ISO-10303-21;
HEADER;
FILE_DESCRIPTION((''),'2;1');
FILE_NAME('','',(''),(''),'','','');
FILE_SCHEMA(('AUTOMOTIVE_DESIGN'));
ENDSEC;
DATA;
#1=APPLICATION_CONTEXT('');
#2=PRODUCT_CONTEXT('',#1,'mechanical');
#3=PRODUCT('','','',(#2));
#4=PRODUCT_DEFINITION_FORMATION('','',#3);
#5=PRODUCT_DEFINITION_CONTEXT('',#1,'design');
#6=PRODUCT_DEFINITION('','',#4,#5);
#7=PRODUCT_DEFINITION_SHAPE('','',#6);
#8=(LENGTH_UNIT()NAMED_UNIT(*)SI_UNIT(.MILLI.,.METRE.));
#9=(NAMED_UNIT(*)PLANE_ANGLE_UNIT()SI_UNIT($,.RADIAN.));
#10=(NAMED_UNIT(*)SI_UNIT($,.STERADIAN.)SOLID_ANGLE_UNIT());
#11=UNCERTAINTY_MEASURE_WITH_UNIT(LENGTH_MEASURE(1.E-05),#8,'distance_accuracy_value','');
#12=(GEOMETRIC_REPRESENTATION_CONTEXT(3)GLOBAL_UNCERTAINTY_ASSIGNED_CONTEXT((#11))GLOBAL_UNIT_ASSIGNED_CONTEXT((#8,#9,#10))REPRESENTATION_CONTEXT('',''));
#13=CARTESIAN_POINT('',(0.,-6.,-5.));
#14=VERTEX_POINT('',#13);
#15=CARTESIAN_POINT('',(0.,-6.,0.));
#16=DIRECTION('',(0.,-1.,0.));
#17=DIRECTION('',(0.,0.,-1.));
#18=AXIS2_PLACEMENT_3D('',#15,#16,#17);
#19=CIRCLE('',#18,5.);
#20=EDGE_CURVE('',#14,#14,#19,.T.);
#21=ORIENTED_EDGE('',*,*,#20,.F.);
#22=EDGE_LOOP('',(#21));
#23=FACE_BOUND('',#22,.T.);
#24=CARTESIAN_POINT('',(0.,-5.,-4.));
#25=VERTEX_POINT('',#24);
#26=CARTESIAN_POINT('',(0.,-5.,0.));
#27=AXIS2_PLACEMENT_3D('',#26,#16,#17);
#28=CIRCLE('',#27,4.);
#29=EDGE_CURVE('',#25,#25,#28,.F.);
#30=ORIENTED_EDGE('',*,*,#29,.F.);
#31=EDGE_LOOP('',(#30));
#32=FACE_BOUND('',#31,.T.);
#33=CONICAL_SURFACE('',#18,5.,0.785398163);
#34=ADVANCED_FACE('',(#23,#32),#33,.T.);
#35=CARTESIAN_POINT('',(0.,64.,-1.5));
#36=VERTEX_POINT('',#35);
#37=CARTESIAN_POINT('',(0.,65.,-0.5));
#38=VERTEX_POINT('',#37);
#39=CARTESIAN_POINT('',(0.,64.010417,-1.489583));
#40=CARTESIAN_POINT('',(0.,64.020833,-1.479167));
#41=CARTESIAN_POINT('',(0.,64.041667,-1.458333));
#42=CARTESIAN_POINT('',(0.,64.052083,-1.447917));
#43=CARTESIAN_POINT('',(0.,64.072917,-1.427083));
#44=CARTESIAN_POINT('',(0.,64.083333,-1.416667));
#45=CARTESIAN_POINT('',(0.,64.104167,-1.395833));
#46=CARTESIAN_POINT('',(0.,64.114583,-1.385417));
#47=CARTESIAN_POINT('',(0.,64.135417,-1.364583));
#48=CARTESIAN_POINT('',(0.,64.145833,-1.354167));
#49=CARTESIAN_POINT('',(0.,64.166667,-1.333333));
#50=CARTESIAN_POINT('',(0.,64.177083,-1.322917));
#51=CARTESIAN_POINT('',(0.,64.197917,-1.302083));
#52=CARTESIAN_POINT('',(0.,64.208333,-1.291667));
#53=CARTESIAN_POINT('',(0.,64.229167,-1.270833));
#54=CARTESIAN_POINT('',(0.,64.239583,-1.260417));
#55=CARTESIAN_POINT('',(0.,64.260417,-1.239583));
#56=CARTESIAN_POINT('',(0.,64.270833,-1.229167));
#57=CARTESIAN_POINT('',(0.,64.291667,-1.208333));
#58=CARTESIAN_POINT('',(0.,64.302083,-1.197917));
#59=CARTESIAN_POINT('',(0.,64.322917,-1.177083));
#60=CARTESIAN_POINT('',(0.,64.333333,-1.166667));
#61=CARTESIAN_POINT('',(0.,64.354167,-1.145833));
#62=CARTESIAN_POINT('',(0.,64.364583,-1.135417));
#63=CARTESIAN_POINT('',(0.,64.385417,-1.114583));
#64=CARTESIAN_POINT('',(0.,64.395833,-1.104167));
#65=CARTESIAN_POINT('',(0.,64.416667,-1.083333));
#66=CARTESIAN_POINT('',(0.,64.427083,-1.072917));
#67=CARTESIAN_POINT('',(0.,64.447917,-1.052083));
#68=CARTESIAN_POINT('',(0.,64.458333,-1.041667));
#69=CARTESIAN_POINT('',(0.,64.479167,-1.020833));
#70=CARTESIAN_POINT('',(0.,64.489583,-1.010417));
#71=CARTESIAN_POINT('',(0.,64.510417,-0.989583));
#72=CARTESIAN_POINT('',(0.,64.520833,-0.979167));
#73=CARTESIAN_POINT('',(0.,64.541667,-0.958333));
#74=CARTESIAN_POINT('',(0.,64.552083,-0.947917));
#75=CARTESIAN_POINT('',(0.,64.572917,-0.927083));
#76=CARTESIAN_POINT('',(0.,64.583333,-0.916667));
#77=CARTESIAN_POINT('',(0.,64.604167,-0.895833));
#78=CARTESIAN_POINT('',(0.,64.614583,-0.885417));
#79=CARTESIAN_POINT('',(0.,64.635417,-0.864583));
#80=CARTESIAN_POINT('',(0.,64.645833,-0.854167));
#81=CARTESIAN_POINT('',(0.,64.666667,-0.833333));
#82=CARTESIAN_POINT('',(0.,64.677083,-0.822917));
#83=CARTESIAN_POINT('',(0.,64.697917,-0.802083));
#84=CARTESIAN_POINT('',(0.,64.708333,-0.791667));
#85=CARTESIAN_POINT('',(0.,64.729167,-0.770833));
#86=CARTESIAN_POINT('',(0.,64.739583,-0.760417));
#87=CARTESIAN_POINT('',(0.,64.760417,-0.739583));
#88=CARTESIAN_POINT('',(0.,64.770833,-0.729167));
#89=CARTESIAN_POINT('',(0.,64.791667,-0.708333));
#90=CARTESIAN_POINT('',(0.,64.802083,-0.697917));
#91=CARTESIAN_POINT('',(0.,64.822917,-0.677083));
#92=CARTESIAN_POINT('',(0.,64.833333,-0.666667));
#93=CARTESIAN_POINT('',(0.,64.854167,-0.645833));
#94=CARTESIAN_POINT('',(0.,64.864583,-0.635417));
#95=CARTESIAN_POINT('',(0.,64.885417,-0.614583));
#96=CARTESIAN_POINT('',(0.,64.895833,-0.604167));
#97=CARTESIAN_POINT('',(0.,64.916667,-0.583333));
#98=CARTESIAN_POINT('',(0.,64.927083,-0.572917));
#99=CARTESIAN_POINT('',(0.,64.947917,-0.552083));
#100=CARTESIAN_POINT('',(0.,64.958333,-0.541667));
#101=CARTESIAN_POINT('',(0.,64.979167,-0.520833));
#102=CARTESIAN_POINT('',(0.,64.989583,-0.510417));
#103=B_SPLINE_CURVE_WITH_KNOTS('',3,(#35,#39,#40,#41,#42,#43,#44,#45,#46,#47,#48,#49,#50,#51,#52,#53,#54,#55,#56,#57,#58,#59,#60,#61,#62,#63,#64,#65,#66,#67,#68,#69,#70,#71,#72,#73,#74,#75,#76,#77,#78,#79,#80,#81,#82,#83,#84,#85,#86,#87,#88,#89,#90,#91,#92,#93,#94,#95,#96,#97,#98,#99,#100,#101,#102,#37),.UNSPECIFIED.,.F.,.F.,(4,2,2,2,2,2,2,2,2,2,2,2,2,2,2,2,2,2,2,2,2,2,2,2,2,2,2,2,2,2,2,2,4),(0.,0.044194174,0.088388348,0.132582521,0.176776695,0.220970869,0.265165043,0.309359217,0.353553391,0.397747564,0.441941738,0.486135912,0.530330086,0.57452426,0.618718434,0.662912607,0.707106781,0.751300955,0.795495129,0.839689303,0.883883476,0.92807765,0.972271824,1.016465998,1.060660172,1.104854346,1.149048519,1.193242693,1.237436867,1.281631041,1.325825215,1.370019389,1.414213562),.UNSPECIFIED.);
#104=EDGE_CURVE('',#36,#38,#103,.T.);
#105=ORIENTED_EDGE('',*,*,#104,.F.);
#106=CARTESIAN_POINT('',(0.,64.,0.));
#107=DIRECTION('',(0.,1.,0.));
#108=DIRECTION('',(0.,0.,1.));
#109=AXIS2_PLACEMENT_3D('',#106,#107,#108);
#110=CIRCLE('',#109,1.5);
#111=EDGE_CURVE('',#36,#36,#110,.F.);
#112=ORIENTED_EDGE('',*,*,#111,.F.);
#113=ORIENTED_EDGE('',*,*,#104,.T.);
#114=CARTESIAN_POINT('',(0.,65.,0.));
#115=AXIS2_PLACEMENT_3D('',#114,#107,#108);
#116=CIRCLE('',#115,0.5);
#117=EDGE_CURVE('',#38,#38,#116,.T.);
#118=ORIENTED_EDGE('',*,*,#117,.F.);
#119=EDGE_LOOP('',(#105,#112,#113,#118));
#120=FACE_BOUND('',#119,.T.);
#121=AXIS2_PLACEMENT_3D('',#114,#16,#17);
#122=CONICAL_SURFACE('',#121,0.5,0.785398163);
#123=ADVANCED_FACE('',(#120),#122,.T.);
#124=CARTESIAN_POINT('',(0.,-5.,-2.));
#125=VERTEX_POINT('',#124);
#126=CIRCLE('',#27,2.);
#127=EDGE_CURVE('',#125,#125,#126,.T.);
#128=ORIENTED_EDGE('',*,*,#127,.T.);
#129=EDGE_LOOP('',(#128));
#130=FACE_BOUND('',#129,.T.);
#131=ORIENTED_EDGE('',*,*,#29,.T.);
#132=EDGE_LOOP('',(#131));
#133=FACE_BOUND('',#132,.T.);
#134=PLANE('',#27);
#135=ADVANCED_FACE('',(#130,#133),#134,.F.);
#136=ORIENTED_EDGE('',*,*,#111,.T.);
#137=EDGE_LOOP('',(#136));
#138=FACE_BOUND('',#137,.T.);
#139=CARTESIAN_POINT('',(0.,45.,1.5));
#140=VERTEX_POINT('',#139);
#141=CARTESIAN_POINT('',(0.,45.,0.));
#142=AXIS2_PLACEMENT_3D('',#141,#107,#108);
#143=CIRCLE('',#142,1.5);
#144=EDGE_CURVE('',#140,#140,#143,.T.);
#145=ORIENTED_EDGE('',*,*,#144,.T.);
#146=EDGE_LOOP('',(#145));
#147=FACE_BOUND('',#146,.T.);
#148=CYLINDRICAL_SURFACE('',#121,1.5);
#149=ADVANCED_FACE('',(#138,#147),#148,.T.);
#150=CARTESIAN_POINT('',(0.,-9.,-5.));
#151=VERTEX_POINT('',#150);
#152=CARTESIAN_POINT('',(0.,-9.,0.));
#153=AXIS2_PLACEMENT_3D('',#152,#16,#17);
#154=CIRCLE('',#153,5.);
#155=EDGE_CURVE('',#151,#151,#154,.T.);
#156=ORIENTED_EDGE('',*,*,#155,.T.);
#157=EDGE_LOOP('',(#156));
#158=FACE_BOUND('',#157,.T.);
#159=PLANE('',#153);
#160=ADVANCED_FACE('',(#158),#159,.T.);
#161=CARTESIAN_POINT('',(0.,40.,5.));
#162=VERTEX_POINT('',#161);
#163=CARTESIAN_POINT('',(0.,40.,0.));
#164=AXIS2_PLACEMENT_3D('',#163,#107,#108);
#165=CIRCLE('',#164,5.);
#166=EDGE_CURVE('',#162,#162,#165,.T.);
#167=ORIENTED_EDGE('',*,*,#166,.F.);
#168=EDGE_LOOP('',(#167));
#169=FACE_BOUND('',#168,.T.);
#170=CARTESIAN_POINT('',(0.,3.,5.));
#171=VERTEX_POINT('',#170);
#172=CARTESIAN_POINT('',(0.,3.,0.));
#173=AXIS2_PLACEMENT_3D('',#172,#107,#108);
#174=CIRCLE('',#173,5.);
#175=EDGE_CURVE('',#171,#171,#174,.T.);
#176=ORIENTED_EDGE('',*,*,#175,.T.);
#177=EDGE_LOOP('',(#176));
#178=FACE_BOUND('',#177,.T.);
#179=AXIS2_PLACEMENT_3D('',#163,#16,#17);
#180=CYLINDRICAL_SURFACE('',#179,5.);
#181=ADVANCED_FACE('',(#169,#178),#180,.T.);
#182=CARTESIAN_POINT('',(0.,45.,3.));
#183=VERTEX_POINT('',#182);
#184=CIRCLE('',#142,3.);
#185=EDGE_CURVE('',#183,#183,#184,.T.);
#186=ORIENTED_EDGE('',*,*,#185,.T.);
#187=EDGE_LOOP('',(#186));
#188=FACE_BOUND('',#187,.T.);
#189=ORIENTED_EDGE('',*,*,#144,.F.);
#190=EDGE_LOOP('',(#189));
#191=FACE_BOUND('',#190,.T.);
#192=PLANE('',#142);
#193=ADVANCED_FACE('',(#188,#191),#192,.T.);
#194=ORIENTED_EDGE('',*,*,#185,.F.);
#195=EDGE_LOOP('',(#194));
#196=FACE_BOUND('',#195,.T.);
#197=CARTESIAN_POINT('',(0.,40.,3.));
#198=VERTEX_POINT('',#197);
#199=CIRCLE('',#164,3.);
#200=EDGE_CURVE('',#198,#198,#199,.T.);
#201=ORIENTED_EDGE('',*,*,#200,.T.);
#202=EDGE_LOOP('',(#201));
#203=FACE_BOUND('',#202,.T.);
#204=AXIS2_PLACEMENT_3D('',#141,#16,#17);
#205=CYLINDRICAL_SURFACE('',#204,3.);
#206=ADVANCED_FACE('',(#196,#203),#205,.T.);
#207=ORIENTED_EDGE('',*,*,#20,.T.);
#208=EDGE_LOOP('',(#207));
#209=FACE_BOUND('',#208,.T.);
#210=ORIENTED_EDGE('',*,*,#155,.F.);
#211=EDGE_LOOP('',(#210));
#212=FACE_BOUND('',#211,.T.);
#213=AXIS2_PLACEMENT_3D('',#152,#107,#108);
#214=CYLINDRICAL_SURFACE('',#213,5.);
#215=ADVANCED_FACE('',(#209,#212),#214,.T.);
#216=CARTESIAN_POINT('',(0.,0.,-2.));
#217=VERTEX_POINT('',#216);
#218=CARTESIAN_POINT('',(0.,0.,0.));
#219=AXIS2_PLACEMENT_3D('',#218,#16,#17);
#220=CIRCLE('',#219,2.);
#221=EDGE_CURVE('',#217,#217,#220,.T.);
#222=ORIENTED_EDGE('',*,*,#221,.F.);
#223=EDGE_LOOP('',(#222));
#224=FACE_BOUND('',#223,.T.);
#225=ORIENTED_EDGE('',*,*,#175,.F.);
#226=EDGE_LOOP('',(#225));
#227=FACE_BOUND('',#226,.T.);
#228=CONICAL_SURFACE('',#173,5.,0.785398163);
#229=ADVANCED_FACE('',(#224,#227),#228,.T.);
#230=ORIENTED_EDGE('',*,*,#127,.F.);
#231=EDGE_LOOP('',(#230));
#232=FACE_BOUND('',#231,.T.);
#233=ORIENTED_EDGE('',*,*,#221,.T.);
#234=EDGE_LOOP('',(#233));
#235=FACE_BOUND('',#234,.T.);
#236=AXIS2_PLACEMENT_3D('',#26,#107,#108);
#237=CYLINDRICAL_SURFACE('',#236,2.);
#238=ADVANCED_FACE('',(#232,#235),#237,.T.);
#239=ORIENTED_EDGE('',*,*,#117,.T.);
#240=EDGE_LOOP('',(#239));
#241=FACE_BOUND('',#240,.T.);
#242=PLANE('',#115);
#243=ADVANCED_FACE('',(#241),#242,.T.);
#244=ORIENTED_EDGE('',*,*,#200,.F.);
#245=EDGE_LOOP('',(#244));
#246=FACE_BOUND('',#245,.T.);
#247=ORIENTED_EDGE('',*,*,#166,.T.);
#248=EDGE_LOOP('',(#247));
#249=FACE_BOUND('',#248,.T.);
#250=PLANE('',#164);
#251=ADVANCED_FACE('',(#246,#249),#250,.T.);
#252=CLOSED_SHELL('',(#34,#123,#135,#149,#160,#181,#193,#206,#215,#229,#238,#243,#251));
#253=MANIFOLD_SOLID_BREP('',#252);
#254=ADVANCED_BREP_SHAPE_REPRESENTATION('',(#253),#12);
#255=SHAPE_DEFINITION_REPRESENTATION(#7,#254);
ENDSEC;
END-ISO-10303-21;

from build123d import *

# Parameters (mm, degrees)
SKETCH1_R           = 5
BOSS_EXTRUDE1_DEPTH = 40
SKETCH2_R           = 3
BOSS_EXTRUDE2_DEPTH = 5
SKETCH3_R           = 1.5
BOSS_EXTRUDE3_DEPTH = 20
CHAMFER1_SIZE       = 1
SKETCH4_R           = 2
BOSS_EXTRUDE4_DEPTH = 5
BOSS_EXTRUDE5_START = 4
SKETCH5_R           = 5
BOSS_EXTRUDE5_DEPTH = 4
CHAMFER2_SIZE       = 3
CHAMFER3_SIZE       = 1


with BuildPart() as part:
    # Sketch1 → Boss-Extrude1 (new body)
    with BuildSketch(Plane(origin=(0, 0, 0), x_dir=(1, 0, 0), z_dir=(0, 1, 0))):
        with Locations(Location((0, 0, 0), (0, 0, 270))):
            Circle(SKETCH1_R)
    extrude(amount=BOSS_EXTRUDE1_DEPTH)

    # Sketch2 → Boss-Extrude2 (add)
    with BuildSketch(Plane(origin=(0, 40, 0), x_dir=(1, 0, 0), z_dir=(0, 1, 0))):
        with Locations(Location((0, 0, 0), (0, 0, 270))):
            Circle(SKETCH2_R)
    extrude(amount=BOSS_EXTRUDE2_DEPTH)

    # Sketch3 → Boss-Extrude3 (add)
    with BuildSketch(Plane(origin=(0, 45, 0), x_dir=(1, 0, 0), z_dir=(0, 1, 0))):
        with Locations(Location((0, 0, 0), (0, 0, 270))):
            Circle(SKETCH3_R)
    extrude(amount=BOSS_EXTRUDE3_DEPTH)

    # Chamfer1
    chamfer1_edges = [part.edges().sort_by_distance(p)[0] for p in [
        (0, 65, -1.5),
    ]]
    chamfer(chamfer1_edges, length=CHAMFER1_SIZE)

    # Sketch4 → Boss-Extrude4 (add)
    with BuildSketch(Plane.XZ):
        with Locations(Location((0, 0, 0), (0, 0, 270))):
            Circle(SKETCH4_R)
    extrude(amount=BOSS_EXTRUDE4_DEPTH)

    # Sketch5 → Boss-Extrude5 (add)
    with BuildSketch(Plane.XZ.offset(5).offset(BOSS_EXTRUDE5_START)):
        with Locations(Location((0, 0, 0), (0, 0, 90))):
            Circle(SKETCH5_R)
    extrude(amount=-BOSS_EXTRUDE5_DEPTH)

    # Chamfer2
    chamfer2_edges = [part.edges().sort_by_distance(p)[0] for p in [
        (0, 0, -5),
    ]]
    chamfer(chamfer2_edges, length=CHAMFER2_SIZE - 0.0001)  # a hair under: the kernel refuses the full size

    # Chamfer3
    chamfer3_edges = [part.edges().sort_by_distance(p)[0] for p in [
        (0, -5, -5),
    ]]
    chamfer(chamfer3_edges, length=CHAMFER3_SIZE)


solid = part.part
